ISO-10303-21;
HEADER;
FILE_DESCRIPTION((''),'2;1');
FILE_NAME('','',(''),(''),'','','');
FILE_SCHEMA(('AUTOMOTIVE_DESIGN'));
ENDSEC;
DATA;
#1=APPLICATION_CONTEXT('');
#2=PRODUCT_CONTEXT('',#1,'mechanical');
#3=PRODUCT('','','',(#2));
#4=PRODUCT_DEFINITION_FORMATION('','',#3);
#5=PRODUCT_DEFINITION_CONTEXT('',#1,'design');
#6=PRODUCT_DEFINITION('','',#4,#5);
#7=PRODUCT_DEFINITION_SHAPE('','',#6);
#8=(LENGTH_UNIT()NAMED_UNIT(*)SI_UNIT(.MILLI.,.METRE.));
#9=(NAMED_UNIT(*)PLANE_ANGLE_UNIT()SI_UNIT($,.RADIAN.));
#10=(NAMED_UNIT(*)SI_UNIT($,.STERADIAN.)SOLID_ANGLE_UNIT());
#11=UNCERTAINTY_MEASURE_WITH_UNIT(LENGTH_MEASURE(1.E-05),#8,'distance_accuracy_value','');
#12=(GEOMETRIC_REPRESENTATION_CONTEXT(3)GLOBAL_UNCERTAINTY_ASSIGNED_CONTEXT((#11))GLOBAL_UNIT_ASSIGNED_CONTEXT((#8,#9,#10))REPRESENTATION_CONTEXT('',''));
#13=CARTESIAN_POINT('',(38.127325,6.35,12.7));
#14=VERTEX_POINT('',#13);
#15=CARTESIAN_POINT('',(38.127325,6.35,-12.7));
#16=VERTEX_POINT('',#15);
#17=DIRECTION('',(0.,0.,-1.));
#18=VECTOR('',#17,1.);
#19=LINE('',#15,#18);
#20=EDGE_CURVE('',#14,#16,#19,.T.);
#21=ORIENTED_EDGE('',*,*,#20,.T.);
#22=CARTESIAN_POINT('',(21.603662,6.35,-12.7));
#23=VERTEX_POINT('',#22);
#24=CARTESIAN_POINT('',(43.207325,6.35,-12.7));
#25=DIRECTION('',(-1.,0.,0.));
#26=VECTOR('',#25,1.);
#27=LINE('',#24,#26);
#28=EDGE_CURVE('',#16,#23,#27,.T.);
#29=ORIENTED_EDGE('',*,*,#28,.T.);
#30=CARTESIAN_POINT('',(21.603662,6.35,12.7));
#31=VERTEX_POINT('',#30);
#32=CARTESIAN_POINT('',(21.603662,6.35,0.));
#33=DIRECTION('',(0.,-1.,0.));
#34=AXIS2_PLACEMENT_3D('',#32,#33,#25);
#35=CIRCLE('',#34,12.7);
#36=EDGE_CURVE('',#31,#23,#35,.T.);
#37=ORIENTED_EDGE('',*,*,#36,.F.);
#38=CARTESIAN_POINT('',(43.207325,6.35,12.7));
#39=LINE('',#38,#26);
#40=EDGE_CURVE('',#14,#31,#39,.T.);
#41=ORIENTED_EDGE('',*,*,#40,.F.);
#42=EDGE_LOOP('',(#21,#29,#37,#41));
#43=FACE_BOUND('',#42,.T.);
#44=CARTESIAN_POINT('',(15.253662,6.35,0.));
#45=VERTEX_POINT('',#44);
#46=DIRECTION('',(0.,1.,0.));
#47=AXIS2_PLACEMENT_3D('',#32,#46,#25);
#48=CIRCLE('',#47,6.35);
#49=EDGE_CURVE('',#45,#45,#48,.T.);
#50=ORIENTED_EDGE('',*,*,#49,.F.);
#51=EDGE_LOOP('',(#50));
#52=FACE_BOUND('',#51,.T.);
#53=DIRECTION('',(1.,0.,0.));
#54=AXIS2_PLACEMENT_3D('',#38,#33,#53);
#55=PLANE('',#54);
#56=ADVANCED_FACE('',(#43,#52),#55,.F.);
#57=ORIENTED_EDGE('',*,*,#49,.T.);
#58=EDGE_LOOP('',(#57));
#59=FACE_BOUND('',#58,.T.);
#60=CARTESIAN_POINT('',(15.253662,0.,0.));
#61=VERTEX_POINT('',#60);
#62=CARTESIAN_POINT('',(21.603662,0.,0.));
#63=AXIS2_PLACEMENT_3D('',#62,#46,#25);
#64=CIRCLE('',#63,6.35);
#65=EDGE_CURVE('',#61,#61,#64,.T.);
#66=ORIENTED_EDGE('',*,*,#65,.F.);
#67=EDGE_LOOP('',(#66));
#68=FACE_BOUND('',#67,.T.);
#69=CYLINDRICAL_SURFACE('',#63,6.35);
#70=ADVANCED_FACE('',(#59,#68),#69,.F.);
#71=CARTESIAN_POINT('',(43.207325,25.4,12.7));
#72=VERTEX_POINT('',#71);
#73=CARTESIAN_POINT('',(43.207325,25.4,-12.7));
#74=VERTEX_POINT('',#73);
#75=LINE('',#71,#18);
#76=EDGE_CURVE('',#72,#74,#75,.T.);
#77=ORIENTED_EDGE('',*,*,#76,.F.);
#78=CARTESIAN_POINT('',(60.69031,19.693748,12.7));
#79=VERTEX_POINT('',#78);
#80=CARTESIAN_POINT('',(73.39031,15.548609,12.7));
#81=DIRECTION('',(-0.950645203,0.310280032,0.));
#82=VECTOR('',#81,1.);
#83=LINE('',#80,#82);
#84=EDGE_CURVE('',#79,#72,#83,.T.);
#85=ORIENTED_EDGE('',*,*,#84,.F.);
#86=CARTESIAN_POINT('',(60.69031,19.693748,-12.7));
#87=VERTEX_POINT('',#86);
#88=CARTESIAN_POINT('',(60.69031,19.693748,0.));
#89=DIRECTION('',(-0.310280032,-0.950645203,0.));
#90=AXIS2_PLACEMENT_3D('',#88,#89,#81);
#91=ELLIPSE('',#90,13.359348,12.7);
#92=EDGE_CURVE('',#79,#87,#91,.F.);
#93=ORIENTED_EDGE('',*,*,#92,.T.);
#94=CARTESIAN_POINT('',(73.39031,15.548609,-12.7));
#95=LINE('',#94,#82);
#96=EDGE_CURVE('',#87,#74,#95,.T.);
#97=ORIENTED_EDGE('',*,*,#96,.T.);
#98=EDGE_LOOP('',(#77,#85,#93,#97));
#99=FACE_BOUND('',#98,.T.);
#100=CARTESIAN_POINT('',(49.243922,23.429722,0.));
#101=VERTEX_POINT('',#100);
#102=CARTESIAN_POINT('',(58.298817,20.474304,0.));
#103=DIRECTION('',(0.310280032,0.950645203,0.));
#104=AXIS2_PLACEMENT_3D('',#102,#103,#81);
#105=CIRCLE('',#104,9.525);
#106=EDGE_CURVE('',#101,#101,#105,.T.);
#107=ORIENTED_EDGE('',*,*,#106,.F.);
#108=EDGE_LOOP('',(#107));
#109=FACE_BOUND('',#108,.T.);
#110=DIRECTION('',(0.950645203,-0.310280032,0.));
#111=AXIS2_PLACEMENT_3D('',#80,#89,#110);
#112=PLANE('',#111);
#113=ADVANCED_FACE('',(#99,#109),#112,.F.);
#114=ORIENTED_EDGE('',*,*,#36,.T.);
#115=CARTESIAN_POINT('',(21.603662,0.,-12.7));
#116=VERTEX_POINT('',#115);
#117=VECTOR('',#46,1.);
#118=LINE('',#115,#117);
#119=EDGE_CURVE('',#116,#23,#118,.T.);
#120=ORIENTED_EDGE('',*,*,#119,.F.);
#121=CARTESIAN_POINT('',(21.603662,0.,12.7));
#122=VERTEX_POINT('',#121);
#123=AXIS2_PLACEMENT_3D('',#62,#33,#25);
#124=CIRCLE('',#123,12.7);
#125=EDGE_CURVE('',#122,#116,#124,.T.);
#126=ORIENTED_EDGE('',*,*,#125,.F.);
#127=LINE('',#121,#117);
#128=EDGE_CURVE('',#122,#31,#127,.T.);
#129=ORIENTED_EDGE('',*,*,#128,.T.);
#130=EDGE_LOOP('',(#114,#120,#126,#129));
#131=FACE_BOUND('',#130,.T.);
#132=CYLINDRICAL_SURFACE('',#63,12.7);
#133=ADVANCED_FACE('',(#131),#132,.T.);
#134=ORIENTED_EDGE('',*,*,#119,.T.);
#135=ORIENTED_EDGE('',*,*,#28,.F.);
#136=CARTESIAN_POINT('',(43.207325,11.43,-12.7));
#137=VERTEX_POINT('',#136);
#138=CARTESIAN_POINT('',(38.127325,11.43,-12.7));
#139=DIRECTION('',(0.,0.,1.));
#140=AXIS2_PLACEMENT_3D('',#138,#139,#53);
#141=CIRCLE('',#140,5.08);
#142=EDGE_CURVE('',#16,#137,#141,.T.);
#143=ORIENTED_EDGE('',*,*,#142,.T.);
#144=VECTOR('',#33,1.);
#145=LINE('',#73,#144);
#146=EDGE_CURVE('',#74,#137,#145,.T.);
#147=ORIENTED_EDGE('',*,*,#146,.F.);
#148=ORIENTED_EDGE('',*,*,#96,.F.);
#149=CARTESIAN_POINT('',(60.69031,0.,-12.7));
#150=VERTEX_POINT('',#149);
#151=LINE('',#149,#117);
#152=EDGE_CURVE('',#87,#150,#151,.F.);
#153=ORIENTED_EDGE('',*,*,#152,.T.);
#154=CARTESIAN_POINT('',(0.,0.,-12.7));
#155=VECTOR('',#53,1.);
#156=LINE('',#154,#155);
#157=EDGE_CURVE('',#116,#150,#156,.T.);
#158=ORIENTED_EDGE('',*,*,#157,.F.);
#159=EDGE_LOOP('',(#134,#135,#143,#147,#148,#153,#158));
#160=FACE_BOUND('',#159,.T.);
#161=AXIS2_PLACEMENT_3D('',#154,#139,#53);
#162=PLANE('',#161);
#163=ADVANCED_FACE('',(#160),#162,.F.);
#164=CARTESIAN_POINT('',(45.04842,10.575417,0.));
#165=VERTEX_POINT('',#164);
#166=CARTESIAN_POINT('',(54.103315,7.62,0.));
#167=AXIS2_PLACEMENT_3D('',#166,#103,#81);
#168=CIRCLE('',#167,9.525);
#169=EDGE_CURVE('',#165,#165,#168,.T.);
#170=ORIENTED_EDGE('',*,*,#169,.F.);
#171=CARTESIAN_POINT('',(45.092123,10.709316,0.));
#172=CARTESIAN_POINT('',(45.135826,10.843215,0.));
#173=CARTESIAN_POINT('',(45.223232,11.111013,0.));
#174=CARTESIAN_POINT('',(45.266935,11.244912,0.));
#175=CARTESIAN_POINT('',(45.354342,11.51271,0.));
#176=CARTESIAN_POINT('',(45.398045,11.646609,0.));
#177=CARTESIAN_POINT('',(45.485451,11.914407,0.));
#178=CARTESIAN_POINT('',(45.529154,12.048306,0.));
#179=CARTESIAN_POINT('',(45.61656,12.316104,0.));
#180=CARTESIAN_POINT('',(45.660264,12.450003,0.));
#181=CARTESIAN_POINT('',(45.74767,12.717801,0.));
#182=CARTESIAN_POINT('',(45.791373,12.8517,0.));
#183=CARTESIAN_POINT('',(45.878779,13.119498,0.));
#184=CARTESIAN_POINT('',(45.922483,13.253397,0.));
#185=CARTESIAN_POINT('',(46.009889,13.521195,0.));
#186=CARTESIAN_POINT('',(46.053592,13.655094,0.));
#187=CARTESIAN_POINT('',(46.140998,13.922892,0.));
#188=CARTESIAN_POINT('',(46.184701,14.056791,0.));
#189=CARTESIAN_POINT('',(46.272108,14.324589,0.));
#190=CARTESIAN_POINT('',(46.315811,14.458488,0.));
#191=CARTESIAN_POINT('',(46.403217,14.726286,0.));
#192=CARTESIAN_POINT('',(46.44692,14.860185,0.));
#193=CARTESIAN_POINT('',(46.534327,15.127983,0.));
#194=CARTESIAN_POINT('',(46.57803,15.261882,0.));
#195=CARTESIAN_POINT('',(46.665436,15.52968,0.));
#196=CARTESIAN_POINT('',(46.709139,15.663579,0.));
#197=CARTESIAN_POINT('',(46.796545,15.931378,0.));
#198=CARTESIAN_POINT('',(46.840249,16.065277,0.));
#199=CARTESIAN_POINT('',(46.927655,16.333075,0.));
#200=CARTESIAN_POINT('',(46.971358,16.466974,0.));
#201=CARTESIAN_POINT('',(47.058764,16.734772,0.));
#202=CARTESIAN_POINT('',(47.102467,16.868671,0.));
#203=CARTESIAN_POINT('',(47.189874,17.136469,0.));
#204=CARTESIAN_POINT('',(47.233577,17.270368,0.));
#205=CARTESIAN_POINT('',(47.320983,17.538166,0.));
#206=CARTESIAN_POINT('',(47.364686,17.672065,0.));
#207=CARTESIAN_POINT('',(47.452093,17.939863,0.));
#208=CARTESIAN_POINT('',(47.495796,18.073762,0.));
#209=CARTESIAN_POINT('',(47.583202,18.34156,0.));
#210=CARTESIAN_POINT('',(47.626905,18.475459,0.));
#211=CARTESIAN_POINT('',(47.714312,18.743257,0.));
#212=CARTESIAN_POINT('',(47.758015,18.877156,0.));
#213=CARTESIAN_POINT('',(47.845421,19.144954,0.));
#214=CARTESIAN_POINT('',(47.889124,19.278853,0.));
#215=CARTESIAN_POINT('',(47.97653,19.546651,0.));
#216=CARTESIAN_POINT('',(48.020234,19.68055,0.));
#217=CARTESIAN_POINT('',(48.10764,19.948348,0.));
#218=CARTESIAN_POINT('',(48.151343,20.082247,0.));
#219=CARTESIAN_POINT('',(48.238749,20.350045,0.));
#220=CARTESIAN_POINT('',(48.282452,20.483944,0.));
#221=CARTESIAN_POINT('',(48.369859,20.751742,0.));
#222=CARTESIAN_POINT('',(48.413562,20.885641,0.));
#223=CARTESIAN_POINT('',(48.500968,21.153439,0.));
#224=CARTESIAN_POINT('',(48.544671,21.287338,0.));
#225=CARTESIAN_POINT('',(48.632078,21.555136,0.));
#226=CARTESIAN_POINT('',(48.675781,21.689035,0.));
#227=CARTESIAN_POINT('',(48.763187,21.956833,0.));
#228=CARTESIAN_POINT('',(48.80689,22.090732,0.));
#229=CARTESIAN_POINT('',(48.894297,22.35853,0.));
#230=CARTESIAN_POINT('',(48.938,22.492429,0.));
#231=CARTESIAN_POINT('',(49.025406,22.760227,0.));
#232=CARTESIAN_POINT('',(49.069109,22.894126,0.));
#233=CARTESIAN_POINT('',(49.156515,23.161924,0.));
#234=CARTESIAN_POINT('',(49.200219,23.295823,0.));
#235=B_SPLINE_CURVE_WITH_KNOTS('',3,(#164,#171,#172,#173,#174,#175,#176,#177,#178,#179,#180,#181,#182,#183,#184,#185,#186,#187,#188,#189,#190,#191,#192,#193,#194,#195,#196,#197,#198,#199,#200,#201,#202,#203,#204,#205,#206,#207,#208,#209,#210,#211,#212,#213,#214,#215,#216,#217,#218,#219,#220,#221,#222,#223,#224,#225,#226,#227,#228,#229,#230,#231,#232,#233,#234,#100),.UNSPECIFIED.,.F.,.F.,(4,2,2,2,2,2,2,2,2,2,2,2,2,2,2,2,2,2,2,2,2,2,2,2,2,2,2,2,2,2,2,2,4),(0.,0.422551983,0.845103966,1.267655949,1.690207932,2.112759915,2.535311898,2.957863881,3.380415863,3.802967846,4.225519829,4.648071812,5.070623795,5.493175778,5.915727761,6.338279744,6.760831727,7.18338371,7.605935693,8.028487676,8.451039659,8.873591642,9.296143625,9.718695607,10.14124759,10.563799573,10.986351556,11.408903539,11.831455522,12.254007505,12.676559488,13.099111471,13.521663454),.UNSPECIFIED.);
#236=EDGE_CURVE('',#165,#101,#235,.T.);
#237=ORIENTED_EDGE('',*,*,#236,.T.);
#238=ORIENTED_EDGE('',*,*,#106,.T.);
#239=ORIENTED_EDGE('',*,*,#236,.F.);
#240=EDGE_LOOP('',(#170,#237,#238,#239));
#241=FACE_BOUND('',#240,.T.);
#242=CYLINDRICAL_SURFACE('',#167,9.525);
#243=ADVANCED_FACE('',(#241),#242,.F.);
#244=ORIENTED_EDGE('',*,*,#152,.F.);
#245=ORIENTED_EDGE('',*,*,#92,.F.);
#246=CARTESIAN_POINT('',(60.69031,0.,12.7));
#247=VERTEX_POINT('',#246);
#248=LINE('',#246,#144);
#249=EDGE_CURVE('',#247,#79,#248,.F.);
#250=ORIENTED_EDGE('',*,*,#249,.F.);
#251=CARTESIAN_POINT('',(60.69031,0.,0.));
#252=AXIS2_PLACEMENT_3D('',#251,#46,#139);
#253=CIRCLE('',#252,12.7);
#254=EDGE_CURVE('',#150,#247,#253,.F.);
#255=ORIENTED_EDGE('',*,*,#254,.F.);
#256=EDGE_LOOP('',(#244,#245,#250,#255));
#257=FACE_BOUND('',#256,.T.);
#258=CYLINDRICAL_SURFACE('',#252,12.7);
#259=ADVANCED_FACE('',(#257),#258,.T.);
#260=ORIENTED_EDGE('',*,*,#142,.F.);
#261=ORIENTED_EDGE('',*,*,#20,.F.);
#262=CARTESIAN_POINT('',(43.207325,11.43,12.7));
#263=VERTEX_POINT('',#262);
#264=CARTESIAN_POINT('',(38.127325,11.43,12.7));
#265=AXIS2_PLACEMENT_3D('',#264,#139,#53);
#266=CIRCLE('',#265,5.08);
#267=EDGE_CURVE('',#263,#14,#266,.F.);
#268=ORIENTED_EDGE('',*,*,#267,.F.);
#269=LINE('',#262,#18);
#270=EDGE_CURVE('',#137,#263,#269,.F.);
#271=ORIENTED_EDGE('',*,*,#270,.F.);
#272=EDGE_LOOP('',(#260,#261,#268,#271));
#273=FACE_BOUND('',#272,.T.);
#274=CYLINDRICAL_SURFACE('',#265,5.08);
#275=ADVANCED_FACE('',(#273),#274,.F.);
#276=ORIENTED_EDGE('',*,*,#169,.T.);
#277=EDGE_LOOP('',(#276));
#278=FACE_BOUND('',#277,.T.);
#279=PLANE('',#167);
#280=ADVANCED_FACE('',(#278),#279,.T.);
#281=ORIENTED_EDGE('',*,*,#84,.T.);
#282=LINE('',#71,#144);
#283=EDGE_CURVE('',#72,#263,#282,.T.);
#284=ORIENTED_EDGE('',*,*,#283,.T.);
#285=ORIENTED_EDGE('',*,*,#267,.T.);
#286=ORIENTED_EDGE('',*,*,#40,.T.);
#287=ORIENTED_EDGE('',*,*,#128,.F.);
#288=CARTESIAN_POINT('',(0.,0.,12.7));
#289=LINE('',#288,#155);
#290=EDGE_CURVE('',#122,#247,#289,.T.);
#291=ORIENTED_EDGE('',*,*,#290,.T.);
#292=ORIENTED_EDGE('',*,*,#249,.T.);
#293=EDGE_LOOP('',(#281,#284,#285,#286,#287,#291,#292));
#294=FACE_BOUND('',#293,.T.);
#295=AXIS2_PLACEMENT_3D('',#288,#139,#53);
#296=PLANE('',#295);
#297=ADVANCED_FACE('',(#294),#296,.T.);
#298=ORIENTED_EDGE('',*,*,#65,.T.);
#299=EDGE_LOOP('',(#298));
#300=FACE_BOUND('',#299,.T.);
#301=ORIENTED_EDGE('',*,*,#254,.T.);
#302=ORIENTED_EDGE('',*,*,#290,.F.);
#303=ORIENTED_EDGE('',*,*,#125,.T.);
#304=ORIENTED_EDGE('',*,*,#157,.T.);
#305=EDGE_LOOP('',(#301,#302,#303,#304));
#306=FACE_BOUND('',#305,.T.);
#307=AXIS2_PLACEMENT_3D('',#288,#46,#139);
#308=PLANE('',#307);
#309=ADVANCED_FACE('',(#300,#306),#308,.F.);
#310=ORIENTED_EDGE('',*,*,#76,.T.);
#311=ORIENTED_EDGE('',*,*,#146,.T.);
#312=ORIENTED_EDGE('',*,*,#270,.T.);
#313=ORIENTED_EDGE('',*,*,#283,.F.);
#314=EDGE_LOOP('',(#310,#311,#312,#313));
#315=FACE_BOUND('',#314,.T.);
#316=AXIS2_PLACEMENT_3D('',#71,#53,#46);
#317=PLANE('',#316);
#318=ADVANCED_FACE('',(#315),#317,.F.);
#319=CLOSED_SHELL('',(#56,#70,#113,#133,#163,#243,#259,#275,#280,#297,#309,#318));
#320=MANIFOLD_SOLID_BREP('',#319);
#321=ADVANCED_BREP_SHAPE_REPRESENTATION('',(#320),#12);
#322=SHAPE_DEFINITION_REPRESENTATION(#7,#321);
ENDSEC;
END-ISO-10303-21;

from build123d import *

# Parameters (mm, degrees)
BOSS_EXTRUDE1_DEPTH = 12.7
CUT_EXTRUDE1_START  = -13.521664
SKETCH2_R           = 9.525
CUT_EXTRUDE1_DEPTH  = 13.521664
SKETCH3_R           = 6.35
CUT_EXTRUDE2_DEPTH  = 77.878671194
FILLET3_START       = -1
FILLET3_DEPTH       = 26.4
CUT_EXTRUDE3_DEPTH  = 77.878671193
FILLET4_R           = 5.08


with BuildPart() as part:
    # Sketch1 → Boss-Extrude1 (new, symmetric)
    with BuildSketch(Plane.XY):
        Polygon((0, 0), (73.390309881, 0), (73.390309881, 15.548608999), (43.207324686, 25.4), (43.207324686, 6.35), (0, 6.35), align=None)
    extrude(amount=BOSS_EXTRUDE1_DEPTH, both=True)

    # Sketch2 → Cut-Extrude1 (cut)
    with BuildSketch(Plane(origin=(11.651871006, 35.699349465, 0), x_dir=(0.9506452030208671, -0.3102800315415328, 0), z_dir=(0.3102800315415327, 0.950645203020867, 0)).offset(CUT_EXTRUDE1_START)):
        with Locations(Location((49.068723147, 0, 0), (0, 0, 180))):
            Circle(SKETCH2_R)
    extrude(amount=CUT_EXTRUDE1_DEPTH, mode=Mode.SUBTRACT)

    # Sketch3 → Cut-Extrude2 (cut, through all)
    with BuildSketch(Plane(origin=(0, 6.35, 0), x_dir=(1, 0, 0), z_dir=(0, 1, 0))):
        with Locations(Location((21.603662343, 0, 0), (0, 0, 180))):
            Circle(SKETCH3_R)
    extrude(amount=-CUT_EXTRUDE2_DEPTH, mode=Mode.SUBTRACT)

    # Fillet3: read off the stored shape, not the designer's step
    # Fillet3 outline → Fillet3 (cut)
    with BuildSketch(Plane(origin=(0, 0, 0), x_dir=(1, 0, 0), z_dir=(0, 1, 0)).offset(FILLET3_START)):
        with BuildLine():
            ThreePointArc((60.690309881, 12.7), (69.670566002, 8.980256121), (73.390309881, 0))
            Line((73.390309881, 0), (73.390309881, 12.7))
            Line((73.390309881, 12.7), (60.690309881, 12.7))
        make_face()
        with BuildLine():
            ThreePointArc((73.390309881, 0), (69.670566002, -8.980256121), (60.690309881, -12.7))
            Line((60.690309881, -12.7), (73.390309881, -12.7))
            Line((73.390309881, -12.7), (73.390309881, 0))
        make_face()
    extrude(amount=FILLET3_DEPTH, mode=Mode.SUBTRACT)

    # Sketch4 → Cut-Extrude3 (cut, through all)
    with BuildSketch(Plane(origin=(0, 6.35, 0), x_dir=(1, 0, 0), z_dir=(0, 1, 0))):
        with BuildLine():
            Line((21.603662343, 12.7), (0, 12.7))
            Line((0, 12.7), (0, -12.7))
            Line((0, -12.7), (21.603662343, -12.7))
            ThreePointArc((21.603662343, -12.7), (8.903662343, 0), (21.603662343, 12.7))
        make_face()
    extrude(amount=-CUT_EXTRUDE3_DEPTH, mode=Mode.SUBTRACT)

    # Fillet4
    fillet4_edges = [part.edges().sort_by_distance(p)[0] for p in [
        (43.207324686, 6.35, 0),
    ]]
    fillet(fillet4_edges, radius=FILLET4_R)


solid = part.part
